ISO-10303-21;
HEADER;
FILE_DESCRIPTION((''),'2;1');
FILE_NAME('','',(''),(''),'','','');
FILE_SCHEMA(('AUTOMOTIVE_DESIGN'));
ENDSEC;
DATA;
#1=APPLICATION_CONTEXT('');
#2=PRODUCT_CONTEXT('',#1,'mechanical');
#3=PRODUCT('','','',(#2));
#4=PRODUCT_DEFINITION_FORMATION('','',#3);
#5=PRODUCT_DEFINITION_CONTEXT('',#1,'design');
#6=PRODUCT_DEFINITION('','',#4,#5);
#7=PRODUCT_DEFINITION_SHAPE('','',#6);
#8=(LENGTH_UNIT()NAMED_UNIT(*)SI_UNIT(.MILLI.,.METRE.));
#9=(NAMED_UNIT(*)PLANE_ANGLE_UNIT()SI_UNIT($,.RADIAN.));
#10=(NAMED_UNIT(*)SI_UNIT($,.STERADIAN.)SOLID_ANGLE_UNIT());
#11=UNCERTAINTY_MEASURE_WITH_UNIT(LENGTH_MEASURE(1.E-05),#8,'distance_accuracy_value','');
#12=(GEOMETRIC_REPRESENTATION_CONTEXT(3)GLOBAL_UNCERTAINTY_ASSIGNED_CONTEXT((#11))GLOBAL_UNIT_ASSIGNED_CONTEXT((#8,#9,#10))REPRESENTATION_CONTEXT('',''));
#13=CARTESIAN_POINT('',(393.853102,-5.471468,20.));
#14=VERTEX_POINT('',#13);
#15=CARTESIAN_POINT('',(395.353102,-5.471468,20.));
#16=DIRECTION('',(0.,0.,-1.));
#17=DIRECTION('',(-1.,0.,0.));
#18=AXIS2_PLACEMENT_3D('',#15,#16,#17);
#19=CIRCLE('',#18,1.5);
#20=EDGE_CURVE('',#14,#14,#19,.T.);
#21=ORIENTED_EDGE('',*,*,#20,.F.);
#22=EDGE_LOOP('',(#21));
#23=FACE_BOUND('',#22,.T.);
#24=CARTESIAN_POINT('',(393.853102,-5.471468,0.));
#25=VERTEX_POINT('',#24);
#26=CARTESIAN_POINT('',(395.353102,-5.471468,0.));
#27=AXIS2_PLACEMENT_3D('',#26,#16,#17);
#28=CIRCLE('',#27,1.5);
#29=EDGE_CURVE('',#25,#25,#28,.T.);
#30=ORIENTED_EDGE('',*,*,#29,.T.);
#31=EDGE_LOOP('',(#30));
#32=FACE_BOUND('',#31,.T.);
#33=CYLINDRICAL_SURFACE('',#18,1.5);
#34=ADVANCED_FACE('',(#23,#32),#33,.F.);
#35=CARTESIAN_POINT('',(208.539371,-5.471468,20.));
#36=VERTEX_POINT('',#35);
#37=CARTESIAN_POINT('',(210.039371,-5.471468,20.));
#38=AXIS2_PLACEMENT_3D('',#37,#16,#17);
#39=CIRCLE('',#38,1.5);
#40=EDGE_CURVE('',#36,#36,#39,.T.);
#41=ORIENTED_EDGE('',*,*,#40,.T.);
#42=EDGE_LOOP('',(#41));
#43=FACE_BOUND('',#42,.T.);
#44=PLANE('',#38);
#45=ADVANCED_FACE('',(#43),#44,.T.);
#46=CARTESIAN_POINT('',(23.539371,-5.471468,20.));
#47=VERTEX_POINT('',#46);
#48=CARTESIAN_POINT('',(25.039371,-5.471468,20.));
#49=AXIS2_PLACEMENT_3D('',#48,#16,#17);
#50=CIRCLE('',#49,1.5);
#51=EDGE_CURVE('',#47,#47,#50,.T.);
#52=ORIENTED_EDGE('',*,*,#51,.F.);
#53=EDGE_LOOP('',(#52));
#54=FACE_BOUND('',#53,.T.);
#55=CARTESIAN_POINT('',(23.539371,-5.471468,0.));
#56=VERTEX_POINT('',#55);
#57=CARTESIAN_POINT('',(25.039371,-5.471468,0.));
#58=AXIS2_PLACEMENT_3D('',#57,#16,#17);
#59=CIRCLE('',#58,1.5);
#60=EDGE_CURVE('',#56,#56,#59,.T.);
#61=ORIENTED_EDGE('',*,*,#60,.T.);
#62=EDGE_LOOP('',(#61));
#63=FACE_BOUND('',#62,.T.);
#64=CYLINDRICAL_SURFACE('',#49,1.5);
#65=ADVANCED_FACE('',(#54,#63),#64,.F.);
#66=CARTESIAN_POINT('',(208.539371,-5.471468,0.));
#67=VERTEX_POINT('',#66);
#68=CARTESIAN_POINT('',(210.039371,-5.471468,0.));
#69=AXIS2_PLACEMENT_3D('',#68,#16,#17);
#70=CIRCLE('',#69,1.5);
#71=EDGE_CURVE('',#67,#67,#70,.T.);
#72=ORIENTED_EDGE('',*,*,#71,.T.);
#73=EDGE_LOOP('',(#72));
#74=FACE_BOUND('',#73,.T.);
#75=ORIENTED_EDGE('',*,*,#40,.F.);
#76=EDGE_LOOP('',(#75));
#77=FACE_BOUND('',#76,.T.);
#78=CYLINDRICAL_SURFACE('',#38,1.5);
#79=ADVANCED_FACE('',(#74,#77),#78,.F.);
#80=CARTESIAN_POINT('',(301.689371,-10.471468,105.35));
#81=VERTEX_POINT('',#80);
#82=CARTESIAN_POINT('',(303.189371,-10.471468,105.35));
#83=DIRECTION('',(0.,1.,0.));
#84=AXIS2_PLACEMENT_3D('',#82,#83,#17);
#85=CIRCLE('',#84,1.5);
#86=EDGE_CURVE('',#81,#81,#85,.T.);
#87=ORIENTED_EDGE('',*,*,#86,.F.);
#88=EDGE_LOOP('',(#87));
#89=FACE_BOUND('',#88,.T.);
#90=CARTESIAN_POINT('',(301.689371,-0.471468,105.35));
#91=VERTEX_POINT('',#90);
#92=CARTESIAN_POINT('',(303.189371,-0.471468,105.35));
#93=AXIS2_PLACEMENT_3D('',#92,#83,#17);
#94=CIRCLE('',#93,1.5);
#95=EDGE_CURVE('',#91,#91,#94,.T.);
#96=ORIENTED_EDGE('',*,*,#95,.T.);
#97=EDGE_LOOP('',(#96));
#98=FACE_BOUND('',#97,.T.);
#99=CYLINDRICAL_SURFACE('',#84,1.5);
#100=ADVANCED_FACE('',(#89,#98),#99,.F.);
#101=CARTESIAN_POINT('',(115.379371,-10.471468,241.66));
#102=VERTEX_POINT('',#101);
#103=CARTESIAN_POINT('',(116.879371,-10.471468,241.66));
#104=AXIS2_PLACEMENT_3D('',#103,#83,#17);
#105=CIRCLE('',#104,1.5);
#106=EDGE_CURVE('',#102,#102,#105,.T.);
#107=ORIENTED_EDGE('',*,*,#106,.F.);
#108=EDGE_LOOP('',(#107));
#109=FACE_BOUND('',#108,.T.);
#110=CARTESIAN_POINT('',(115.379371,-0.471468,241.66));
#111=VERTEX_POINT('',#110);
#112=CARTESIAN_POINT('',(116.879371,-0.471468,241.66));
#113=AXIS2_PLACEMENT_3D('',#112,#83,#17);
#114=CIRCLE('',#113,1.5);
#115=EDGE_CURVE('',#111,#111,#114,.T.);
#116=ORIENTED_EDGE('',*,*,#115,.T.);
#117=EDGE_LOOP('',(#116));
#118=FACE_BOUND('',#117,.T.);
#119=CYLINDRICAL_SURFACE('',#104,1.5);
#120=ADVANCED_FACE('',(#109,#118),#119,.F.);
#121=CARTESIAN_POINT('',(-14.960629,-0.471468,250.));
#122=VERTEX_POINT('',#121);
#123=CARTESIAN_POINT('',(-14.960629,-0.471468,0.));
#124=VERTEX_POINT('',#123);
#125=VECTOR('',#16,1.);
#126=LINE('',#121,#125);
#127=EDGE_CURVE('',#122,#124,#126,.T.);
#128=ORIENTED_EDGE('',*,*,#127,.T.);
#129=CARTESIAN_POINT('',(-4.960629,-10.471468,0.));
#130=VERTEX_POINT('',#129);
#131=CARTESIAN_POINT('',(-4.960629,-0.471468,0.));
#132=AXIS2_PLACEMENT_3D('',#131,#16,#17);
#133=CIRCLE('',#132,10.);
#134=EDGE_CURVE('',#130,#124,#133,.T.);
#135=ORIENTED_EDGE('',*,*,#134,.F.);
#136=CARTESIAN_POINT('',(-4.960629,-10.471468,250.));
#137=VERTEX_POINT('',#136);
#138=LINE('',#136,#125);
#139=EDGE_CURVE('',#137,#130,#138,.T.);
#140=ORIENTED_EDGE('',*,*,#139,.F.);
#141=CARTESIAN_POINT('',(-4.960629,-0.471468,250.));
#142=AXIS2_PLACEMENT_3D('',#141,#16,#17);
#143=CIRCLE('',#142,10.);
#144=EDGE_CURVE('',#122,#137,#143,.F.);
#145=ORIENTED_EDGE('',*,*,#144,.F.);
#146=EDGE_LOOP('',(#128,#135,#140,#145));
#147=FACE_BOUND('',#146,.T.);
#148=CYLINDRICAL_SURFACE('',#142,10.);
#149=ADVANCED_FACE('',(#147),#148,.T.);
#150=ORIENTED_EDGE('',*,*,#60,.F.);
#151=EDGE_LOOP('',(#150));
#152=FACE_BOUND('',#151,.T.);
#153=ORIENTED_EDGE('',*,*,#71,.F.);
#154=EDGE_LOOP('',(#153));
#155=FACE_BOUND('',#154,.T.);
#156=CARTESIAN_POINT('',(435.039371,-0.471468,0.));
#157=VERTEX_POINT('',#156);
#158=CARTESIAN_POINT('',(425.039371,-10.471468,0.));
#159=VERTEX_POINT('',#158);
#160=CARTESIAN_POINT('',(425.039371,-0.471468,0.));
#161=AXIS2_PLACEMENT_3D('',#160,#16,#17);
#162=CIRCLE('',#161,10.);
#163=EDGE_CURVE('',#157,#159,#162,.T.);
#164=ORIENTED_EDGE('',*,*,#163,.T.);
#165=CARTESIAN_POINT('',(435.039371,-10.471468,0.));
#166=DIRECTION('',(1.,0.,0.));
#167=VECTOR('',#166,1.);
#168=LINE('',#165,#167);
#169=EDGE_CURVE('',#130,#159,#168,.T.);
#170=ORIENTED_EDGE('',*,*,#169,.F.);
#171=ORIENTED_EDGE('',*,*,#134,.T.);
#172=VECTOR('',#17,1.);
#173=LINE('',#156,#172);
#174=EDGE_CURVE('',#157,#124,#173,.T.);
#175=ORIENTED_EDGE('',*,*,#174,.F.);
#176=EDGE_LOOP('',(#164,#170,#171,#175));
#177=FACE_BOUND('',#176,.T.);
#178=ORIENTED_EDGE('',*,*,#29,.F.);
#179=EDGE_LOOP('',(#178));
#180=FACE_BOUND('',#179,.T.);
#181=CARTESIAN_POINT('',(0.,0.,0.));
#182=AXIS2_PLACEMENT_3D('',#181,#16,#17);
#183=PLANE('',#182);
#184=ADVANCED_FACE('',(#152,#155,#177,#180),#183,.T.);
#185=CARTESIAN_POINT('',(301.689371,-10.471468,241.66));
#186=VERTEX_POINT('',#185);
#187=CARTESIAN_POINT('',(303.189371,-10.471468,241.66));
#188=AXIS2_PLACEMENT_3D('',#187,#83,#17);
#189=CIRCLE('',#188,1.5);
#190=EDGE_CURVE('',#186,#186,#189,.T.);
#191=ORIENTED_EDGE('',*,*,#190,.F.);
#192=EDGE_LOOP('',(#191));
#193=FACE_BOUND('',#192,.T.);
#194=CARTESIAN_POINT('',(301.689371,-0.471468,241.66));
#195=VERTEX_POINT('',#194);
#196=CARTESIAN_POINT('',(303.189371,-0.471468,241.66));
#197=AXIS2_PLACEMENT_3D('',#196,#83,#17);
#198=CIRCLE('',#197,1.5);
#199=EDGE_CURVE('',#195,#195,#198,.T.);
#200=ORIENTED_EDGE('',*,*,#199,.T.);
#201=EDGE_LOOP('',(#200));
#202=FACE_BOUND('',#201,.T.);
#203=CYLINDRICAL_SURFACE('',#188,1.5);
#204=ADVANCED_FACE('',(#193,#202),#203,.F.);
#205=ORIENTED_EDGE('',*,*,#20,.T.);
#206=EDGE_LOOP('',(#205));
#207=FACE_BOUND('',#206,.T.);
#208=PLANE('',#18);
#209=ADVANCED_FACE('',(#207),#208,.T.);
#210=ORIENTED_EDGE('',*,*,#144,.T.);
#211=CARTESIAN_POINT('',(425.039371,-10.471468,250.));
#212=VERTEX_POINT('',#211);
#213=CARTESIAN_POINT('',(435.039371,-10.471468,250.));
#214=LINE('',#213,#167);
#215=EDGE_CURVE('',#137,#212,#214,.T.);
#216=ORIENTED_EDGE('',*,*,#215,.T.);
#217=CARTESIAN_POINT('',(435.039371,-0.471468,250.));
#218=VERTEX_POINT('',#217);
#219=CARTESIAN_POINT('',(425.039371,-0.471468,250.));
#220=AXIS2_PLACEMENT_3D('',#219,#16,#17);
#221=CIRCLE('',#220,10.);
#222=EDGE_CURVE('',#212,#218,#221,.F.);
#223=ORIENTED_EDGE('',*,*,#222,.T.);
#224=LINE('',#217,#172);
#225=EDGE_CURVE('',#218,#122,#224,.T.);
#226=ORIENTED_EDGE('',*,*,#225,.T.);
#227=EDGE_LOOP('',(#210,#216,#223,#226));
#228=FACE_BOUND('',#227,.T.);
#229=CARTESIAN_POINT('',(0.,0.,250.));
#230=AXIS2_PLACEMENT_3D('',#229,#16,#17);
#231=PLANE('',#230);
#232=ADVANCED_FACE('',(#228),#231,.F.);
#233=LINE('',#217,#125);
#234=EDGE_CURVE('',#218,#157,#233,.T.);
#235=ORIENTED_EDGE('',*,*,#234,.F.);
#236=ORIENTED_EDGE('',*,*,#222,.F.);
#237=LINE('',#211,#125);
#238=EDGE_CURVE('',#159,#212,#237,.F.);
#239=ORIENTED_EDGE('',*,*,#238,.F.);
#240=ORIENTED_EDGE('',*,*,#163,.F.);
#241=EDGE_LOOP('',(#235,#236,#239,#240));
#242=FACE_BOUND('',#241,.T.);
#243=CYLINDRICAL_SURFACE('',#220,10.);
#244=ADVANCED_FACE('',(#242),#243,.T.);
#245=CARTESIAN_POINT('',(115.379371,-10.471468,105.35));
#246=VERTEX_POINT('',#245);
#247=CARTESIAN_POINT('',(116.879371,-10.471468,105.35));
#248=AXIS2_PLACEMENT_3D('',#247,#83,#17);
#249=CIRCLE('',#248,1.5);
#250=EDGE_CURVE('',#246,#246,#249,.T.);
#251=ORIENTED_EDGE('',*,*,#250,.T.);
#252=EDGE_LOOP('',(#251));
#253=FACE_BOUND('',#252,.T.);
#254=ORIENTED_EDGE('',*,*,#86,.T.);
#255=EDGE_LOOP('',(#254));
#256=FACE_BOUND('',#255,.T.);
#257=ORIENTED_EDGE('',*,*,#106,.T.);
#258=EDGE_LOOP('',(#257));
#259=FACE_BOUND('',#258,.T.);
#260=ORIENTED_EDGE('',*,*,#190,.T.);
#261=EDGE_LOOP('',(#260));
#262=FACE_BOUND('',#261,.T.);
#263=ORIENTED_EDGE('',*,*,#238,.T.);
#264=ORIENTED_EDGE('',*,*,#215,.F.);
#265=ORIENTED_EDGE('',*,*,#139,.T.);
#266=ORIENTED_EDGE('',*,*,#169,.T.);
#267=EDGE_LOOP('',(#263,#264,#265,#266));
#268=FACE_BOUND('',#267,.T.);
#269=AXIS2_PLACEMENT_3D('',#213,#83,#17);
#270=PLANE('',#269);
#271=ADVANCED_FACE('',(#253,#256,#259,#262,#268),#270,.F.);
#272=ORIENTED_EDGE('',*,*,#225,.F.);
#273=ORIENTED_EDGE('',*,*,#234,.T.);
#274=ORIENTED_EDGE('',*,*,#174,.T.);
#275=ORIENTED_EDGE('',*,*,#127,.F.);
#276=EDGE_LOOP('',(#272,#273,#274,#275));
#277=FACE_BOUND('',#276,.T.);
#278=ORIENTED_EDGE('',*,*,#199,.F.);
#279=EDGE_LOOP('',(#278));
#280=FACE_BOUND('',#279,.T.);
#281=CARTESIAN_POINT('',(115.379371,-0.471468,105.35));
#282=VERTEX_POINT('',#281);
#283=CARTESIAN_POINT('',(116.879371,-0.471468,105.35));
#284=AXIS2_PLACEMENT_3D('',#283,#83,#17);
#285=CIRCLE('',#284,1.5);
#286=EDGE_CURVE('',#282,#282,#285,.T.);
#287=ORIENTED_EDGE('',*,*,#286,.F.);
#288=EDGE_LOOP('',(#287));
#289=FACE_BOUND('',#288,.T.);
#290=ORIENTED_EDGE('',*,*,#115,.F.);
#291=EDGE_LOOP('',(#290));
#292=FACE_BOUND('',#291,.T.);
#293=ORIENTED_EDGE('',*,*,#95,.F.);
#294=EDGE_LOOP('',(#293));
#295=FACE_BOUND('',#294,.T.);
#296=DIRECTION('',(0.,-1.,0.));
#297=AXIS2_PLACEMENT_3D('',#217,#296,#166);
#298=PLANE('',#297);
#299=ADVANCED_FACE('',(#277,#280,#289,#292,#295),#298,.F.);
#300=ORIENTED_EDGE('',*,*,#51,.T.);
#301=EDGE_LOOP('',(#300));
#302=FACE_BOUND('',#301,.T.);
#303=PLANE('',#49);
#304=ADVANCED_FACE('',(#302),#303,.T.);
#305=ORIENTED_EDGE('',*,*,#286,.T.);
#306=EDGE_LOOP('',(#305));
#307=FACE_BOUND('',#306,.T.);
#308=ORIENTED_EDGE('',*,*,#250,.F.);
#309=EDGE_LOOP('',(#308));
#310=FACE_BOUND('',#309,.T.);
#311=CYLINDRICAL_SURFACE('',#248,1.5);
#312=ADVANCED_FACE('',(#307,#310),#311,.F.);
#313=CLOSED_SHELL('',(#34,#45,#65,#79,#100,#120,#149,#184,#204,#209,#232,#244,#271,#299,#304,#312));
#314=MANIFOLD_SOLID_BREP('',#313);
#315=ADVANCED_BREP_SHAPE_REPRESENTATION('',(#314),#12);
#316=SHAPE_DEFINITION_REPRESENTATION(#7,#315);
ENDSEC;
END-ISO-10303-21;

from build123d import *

# Parameters (mm, degrees)
SKETCH1_W           = 450
SKETCH1_H           = 10
BOSS_EXTRUDE2_DEPTH = 250
SKETCH2_R           = 3
CUT_EXTRUDE1_DEPTH  = 20
FILLET1_R           = 10
FILLET2_R           = 10
SKETCH4_R           = 1.5
CUT_EXTRUDE3_DEPTH  = 10
SKETCH5_R           = 3
BOSS_EXTRUDE3_DEPTH = 61
SKETCH6_R           = 1.5
CUT_EXTRUDE4_DEPTH  = 20


with BuildPart() as part:
    # Sketch1 → Boss-Extrude2 (new body)
    with BuildSketch(Plane.XY):
        with Locations((210.039371405, -5.47146824)):
            Rectangle(SKETCH1_W, SKETCH1_H)
    extrude(amount=BOSS_EXTRUDE2_DEPTH)

    # Sketch2 → Cut-Extrude1 (cut)
    with BuildSketch(Plane(origin=(0, 0, 0), x_dir=(-1, 0, 0), z_dir=(0, 0, -1))):
        with Locations((-25.039371405, -5.47146824)):
            Circle(SKETCH2_R)
        with Locations((-210.039371405, -5.47146824)):
            Circle(SKETCH2_R)
        with Locations((-395.039371405, -5.47146824)):
            Circle(SKETCH2_R)
    extrude(amount=-CUT_EXTRUDE1_DEPTH, mode=Mode.SUBTRACT)

    # Fillet1
    fillet1_edges = [part.edges().sort_by_distance(p)[0] for p in [
        (-14.960628595, -10.47146824, 125),
    ]]
    fillet(fillet1_edges, radius=FILLET1_R - 0.0001)  # a hair under: the kernel refuses the full size

    # Fillet2
    fillet2_edges = [part.edges().sort_by_distance(p)[0] for p in [
        (435.039371405, -10.47146824, 125),
    ]]
    fillet(fillet2_edges, radius=FILLET2_R - 0.0001)  # a hair under: the kernel refuses the full size

    # Sketch4 → Cut-Extrude3 (cut)
    with BuildSketch(Plane(origin=(0, -0.47146824, 0), x_dir=(1, 0, 0), z_dir=(0, 1, 0))):
        with Locations(Location((303.189371405, -241.66, 0), (0, 0, 180))):
            Circle(SKETCH4_R)
        with Locations(Location((116.879371405, -241.66, 0), (0, 0, 180))):
            Circle(SKETCH4_R)
        with Locations(Location((116.879371405, -105.35, 0), (0, 0, 180))):
            Circle(SKETCH4_R)
        with Locations(Location((303.189371405, -105.35, 0), (0, 0, 180))):
            Circle(SKETCH4_R)
    extrude(amount=-CUT_EXTRUDE3_DEPTH, mode=Mode.SUBTRACT)

    # Sketch5 → Boss-Extrude3 (add)
    with BuildSketch(Plane(origin=(0, 0, 0), x_dir=(-1, 0, 0), z_dir=(0, 0, -1))):
        with Locations((-395.039371405, -5.47146824)):
            Circle(SKETCH5_R)
        with Locations((-210.039371405, -5.47146824)):
            Circle(SKETCH5_R)
        with Locations((-25.039371405, -5.47146824)):
            Circle(SKETCH5_R)
    extrude(amount=-BOSS_EXTRUDE3_DEPTH)

    # Sketch6 → Cut-Extrude4 (cut)
    with BuildSketch(Plane(origin=(0, 0, 0), x_dir=(-1, 0, 0), z_dir=(0, 0, -1))):
        with Locations((-395.353101739, -5.47146824)):
            Circle(SKETCH6_R)
        with Locations((-210.039371405, -5.47146824)):
            Circle(SKETCH6_R)
        with Locations((-25.039371405, -5.47146824)):
            Circle(SKETCH6_R)
    extrude(amount=-CUT_EXTRUDE4_DEPTH, mode=Mode.SUBTRACT)


solid = part.part
